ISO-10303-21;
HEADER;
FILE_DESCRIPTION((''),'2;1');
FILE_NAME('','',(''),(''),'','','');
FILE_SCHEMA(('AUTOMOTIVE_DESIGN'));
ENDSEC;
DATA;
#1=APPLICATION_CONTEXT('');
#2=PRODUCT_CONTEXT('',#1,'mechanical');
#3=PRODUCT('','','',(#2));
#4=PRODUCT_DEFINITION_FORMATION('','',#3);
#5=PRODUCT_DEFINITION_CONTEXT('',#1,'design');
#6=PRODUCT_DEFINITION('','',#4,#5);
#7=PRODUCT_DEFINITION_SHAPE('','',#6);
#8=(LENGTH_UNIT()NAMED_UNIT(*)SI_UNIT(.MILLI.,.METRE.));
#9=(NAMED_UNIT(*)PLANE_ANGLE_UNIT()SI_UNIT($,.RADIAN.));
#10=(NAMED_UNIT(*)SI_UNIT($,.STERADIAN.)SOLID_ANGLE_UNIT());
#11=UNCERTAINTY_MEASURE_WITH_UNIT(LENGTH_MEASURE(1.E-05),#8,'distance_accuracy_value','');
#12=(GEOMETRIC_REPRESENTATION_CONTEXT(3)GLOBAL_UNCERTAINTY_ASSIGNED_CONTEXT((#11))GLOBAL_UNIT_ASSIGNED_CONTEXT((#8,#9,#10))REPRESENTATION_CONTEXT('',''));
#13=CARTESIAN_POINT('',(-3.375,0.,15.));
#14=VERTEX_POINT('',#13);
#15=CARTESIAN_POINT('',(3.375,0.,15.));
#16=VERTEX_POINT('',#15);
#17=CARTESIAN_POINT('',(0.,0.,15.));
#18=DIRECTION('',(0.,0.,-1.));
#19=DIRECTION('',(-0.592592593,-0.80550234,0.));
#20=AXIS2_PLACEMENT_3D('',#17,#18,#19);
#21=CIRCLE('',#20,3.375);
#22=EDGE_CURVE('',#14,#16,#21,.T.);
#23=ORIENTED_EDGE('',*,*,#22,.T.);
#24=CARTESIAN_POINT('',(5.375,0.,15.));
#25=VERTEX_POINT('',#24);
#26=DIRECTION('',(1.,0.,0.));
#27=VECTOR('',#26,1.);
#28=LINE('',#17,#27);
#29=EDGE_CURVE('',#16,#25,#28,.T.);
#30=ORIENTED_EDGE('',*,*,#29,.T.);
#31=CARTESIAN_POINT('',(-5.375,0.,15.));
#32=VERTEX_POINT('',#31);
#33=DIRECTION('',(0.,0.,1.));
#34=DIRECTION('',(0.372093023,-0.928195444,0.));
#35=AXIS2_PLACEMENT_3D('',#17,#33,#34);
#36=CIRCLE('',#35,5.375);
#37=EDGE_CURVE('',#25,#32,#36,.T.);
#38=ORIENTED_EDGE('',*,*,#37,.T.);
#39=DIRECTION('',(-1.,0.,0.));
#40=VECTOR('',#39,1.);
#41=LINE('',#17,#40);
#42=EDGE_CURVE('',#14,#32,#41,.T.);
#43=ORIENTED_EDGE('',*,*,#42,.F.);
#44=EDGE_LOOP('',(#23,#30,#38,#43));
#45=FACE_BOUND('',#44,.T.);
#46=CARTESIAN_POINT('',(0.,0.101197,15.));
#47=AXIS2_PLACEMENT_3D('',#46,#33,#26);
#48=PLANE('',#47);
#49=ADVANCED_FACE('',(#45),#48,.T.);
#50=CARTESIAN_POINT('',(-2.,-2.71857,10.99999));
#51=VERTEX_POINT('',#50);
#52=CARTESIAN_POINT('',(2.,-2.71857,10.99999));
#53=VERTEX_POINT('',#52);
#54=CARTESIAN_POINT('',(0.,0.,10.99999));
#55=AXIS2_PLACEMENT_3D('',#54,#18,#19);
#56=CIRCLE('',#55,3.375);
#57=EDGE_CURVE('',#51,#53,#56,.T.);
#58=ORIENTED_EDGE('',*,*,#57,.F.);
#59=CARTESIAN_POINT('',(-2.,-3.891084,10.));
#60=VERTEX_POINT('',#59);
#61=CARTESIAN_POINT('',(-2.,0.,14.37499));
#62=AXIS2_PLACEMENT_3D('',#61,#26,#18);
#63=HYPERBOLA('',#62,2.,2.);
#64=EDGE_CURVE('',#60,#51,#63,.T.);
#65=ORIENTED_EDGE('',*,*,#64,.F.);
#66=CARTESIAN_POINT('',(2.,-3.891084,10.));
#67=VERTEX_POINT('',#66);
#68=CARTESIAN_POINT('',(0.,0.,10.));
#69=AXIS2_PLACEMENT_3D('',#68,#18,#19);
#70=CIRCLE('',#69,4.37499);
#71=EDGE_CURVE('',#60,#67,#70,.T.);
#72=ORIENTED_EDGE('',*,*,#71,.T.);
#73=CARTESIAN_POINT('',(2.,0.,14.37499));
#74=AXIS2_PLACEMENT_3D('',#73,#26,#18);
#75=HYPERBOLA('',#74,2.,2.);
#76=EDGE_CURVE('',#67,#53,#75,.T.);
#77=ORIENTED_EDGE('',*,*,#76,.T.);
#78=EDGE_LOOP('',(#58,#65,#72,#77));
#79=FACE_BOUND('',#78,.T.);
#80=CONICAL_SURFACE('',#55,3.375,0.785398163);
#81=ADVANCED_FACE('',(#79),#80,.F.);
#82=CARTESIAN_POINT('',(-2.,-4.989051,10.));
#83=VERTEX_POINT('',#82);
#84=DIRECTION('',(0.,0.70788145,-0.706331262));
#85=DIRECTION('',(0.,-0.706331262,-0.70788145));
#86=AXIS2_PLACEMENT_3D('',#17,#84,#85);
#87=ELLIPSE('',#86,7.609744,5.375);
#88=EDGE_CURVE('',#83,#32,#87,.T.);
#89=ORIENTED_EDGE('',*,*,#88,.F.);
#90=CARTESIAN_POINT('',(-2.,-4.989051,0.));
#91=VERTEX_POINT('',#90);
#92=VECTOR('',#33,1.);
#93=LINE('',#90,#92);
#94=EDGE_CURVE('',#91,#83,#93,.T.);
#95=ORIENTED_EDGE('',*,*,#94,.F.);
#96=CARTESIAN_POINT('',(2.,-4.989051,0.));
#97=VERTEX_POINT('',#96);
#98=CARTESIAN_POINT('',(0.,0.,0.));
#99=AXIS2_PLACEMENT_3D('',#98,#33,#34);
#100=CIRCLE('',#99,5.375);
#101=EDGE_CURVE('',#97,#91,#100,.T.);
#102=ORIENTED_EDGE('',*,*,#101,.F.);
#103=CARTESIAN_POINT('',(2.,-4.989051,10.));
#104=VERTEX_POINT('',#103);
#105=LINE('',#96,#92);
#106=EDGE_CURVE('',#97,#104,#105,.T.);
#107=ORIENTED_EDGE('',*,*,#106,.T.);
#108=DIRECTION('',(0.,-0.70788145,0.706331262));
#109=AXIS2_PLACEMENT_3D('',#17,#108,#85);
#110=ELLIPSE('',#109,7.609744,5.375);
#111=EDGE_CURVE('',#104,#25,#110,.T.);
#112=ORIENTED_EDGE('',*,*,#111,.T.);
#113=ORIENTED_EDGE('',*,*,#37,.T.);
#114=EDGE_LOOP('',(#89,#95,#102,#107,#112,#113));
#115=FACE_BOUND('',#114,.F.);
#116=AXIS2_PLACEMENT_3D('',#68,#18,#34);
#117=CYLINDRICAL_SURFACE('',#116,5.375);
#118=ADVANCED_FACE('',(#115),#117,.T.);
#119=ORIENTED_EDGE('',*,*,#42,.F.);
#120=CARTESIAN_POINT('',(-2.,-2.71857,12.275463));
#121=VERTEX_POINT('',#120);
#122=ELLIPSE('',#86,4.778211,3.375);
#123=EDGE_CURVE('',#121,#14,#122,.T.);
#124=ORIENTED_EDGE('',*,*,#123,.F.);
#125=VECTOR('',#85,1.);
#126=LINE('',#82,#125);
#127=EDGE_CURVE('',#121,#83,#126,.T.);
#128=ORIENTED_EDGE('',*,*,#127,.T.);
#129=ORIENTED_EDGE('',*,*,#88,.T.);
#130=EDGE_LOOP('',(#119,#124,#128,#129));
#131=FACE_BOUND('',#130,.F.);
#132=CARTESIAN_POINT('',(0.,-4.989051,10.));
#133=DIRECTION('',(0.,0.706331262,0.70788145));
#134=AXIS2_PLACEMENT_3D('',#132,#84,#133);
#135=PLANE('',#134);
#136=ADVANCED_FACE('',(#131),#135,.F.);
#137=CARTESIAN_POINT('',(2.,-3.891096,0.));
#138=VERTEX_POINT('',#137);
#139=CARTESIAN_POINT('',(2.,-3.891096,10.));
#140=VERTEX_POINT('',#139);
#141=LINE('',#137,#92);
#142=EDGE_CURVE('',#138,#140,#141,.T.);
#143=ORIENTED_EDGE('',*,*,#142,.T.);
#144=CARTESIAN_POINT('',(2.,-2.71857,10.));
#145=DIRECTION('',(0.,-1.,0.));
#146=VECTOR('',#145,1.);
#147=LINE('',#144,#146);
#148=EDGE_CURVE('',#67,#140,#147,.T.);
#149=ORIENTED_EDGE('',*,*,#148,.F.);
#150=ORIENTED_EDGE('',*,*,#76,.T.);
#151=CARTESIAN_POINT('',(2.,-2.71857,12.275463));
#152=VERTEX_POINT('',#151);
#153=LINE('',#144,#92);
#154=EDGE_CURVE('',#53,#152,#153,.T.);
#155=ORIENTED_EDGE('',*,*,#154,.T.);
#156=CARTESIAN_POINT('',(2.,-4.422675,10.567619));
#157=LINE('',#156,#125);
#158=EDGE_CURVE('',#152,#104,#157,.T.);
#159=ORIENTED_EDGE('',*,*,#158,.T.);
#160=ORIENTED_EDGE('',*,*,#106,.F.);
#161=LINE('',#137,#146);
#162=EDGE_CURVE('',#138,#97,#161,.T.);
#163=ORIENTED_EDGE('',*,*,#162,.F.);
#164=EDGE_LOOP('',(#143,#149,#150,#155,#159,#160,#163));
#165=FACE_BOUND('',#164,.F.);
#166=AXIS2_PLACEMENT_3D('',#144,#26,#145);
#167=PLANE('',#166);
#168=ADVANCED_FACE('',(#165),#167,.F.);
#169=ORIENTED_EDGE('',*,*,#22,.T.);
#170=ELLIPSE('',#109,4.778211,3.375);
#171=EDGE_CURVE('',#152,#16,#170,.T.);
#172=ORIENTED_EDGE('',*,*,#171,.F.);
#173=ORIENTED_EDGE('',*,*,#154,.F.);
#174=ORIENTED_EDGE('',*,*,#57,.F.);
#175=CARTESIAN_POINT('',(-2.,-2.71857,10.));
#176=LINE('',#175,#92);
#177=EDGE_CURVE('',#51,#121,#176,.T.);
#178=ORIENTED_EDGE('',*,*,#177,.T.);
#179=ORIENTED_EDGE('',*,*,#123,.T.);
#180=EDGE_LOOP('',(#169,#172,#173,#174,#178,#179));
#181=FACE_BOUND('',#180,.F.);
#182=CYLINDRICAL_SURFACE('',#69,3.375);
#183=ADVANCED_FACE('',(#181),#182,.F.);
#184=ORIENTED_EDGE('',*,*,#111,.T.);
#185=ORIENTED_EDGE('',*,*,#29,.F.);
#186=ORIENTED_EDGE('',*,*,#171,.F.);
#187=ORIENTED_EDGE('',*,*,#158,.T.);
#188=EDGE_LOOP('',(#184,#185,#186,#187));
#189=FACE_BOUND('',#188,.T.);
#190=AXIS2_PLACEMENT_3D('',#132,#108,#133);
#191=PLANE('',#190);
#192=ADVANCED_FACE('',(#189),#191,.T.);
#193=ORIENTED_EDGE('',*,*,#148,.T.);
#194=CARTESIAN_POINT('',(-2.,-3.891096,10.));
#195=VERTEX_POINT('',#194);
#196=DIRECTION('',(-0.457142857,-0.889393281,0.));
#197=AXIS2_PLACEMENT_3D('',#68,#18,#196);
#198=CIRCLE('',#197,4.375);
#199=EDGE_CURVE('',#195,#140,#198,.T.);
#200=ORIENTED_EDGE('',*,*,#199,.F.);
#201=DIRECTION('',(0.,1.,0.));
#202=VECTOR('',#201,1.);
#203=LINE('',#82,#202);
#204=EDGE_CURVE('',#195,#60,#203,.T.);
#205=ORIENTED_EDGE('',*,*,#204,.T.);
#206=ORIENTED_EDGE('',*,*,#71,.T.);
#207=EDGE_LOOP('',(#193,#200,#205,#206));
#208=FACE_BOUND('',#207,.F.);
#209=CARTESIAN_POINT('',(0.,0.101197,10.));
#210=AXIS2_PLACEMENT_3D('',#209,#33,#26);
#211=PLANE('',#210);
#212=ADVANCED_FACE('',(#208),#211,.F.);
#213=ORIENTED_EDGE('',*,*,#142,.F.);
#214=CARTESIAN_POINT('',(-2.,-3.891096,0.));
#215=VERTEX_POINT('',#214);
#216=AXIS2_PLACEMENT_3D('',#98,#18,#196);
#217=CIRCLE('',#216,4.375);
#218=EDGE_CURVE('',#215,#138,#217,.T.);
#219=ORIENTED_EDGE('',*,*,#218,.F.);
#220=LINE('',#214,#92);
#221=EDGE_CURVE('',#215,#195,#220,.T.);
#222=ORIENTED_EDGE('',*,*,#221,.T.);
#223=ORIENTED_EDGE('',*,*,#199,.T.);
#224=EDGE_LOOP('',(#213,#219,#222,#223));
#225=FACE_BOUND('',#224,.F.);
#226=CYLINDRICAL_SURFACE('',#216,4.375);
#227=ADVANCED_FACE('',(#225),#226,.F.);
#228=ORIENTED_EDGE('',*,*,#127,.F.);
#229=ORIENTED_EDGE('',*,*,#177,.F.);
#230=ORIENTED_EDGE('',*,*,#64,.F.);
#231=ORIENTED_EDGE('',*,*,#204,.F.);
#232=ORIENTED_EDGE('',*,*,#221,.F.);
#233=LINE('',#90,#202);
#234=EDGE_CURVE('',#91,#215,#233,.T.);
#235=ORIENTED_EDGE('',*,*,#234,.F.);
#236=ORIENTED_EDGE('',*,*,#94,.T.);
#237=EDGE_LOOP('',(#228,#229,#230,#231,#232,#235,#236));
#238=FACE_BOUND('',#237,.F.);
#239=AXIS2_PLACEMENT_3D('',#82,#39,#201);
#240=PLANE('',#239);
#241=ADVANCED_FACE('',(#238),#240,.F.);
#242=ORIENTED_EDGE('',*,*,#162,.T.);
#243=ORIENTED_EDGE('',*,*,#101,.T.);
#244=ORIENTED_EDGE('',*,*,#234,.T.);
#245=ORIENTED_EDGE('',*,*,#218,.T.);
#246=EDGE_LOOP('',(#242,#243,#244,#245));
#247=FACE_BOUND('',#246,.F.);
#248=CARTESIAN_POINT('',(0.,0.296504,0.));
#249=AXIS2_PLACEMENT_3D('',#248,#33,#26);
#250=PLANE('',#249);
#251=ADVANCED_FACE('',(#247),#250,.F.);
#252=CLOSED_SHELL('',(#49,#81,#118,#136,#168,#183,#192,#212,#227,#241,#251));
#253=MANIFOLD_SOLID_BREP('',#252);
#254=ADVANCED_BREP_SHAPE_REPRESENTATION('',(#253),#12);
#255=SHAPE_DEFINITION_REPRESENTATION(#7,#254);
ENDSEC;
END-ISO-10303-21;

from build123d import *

# Parameters (mm, degrees)
F1_DEPTH      = 10
F3_DEPTH      = 5
F4_SIZE       = 0.99999
F6_DEPTH      = 25
F6_DEPTH_BACK = 25


# Not quite as in the source:
# - a fillet or chamfer is up to 0.001 mm smaller than in the source, because OpenCascade refuses the exact size


with BuildPart() as f1:
    # F0 (on Top) → F1 (new body)
    with BuildSketch(Plane.XY):
        with BuildLine():
            Line((2, -3.8910956041), (2, -4.9890505109))
            ThreePointArc((2, -4.9890505109), (0, 5.375), (-2, -4.9890505109))
            Line((-2, -4.9890505109), (-2, -3.8910956041))
            ThreePointArc((-2, -3.8910956041), (0, 4.375), (2, -3.8910956041))
        make_face()
    extrude(amount=F1_DEPTH)

    # F2 (on face) → F3 (join)
    with BuildSketch(Plane.XY.offset(10)):
        with BuildLine():
            Line((2, -2.7185703964), (2, -4.9890505109))
            ThreePointArc((2, -4.9890505109), (0, 5.375), (-2, -4.9890505109))
            Line((-2, -4.9890505109), (-2, -2.7185703964))
            ThreePointArc((-2, -2.7185703964), (0, 3.375), (2, -2.7185703964))
        make_face()
    extrude(amount=F3_DEPTH)

    # F4 (size 1 in the source; OpenCascade refuses exactly that, so slightly less here)
    f4_edges = [f1.edges().sort_by_distance(p)[0] for p in [
        (0, 3.375, 10),
    ]]
    chamfer(f4_edges, length=F4_SIZE)

    # F5 (on Right) → F6 (cut, two sides)
    with BuildSketch(Plane.YZ) as f6_sk:
        Polygon((0, 15), (-4.9890505109, 15), (-4.9890505109, 10), align=None)
    extrude(amount=-F6_DEPTH, mode=Mode.SUBTRACT)
    extrude(f6_sk.sketch, amount=F6_DEPTH_BACK, mode=Mode.SUBTRACT)


solid = f1.part
